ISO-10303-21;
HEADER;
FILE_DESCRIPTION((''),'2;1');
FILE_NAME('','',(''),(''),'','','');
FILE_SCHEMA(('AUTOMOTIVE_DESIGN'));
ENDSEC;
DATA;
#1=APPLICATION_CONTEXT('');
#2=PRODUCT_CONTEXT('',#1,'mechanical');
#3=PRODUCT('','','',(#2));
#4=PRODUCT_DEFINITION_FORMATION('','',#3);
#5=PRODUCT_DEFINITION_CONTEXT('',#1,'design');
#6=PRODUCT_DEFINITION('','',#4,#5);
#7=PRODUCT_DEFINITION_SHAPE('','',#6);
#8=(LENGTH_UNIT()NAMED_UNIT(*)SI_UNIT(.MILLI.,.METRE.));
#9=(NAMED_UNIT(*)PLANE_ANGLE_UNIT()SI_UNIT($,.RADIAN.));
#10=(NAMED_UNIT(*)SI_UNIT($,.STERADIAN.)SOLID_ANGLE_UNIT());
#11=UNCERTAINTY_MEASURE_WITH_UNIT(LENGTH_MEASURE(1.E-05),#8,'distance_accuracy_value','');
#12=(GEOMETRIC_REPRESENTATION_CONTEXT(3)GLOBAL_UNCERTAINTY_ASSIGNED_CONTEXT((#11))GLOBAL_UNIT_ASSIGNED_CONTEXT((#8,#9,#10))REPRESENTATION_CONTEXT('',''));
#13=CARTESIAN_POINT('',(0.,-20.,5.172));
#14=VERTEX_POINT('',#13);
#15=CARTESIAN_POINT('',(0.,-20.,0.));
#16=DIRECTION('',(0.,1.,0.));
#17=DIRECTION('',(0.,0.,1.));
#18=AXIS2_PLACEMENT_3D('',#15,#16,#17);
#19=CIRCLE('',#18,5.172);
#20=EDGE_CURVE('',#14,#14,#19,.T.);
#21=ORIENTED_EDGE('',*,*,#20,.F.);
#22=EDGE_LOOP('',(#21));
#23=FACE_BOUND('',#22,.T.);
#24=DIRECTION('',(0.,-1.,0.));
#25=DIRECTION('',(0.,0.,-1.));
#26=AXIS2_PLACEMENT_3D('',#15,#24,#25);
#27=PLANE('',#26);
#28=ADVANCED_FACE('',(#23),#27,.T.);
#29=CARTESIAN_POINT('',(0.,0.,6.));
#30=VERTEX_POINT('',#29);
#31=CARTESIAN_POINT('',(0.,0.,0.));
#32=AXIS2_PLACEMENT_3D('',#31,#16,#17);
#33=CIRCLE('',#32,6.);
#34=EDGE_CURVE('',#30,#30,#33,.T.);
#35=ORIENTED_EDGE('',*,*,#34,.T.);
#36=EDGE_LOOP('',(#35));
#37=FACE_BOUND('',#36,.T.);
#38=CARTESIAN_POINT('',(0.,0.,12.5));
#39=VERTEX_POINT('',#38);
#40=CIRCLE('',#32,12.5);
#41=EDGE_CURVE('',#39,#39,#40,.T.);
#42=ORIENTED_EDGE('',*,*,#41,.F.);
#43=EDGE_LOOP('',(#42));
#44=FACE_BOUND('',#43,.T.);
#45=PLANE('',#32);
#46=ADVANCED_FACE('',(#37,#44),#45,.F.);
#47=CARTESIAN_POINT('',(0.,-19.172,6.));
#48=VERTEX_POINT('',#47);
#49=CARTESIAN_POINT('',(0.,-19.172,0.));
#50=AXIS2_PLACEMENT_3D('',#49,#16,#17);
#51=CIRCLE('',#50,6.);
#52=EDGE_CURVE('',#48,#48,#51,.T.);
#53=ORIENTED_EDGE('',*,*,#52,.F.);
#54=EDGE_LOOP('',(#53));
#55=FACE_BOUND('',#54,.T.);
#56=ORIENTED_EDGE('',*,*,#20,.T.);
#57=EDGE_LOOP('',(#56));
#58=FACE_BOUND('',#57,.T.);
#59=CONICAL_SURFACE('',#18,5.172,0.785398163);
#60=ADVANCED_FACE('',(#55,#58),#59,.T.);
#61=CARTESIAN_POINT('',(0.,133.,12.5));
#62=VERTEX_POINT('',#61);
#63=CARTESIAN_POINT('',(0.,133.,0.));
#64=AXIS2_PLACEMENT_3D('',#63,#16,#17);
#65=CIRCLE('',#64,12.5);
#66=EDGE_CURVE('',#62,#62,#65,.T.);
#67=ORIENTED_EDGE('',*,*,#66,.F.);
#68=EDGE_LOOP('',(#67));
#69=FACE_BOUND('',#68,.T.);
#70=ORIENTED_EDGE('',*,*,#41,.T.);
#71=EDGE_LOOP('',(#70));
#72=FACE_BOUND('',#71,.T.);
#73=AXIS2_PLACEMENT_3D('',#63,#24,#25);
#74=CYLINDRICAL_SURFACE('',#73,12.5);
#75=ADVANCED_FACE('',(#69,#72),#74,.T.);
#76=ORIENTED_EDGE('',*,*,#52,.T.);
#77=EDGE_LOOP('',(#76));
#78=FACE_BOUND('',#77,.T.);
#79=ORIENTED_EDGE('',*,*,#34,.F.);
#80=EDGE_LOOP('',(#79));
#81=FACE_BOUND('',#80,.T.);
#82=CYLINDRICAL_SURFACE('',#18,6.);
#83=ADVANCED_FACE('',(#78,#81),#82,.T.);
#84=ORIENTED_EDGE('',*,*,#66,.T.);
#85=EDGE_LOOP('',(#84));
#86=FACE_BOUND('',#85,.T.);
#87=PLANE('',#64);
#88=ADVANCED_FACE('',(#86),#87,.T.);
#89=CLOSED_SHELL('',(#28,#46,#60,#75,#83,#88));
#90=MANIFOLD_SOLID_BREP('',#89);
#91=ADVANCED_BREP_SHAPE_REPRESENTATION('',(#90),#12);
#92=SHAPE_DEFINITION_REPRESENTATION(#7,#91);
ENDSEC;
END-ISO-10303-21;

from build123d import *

# Parameters (mm, degrees)
SKETCH1_R           = 12.5
BOSS_EXTRUDE1_DEPTH = 133
SKETCH2_R           = 10
BOSS_EXTRUDE2_DEPTH = 20


# Read off the part's stored shape, not the designer's step: M12x1.5 Machine Threads Stud1
with BuildPart() as part:
    # Sketch1 → Boss-Extrude1 (new body)
    with BuildSketch(Plane(origin=(0, 0, 0), x_dir=(1, 0, 0), z_dir=(0, 1, 0))):
        with Locations(Location((0, 0, 0), (0, 0, 270))):
            Circle(SKETCH1_R)
    extrude(amount=BOSS_EXTRUDE1_DEPTH)

    # Sketch2 → Boss-Extrude2 (add)
    with BuildSketch(Plane.XZ):
        with Locations(Location((0, 0, 0), (0, 0, 270))):
            Circle(SKETCH2_R)
    extrude(amount=BOSS_EXTRUDE2_DEPTH)

    # M12x1.5 Machine Threads Stud1 outline → M12x1.5 Machine Threads Stud1 (revolve, cut)
    with BuildSketch(Plane.XY):
        Polygon((10, 0), (6, 0), (6, -19.172), (5.172, -20), (10, -20), align=None)
    revolve(axis=Axis((0, 0, 0), (0, 1, 0)), mode=Mode.SUBTRACT)


solid = part.part
